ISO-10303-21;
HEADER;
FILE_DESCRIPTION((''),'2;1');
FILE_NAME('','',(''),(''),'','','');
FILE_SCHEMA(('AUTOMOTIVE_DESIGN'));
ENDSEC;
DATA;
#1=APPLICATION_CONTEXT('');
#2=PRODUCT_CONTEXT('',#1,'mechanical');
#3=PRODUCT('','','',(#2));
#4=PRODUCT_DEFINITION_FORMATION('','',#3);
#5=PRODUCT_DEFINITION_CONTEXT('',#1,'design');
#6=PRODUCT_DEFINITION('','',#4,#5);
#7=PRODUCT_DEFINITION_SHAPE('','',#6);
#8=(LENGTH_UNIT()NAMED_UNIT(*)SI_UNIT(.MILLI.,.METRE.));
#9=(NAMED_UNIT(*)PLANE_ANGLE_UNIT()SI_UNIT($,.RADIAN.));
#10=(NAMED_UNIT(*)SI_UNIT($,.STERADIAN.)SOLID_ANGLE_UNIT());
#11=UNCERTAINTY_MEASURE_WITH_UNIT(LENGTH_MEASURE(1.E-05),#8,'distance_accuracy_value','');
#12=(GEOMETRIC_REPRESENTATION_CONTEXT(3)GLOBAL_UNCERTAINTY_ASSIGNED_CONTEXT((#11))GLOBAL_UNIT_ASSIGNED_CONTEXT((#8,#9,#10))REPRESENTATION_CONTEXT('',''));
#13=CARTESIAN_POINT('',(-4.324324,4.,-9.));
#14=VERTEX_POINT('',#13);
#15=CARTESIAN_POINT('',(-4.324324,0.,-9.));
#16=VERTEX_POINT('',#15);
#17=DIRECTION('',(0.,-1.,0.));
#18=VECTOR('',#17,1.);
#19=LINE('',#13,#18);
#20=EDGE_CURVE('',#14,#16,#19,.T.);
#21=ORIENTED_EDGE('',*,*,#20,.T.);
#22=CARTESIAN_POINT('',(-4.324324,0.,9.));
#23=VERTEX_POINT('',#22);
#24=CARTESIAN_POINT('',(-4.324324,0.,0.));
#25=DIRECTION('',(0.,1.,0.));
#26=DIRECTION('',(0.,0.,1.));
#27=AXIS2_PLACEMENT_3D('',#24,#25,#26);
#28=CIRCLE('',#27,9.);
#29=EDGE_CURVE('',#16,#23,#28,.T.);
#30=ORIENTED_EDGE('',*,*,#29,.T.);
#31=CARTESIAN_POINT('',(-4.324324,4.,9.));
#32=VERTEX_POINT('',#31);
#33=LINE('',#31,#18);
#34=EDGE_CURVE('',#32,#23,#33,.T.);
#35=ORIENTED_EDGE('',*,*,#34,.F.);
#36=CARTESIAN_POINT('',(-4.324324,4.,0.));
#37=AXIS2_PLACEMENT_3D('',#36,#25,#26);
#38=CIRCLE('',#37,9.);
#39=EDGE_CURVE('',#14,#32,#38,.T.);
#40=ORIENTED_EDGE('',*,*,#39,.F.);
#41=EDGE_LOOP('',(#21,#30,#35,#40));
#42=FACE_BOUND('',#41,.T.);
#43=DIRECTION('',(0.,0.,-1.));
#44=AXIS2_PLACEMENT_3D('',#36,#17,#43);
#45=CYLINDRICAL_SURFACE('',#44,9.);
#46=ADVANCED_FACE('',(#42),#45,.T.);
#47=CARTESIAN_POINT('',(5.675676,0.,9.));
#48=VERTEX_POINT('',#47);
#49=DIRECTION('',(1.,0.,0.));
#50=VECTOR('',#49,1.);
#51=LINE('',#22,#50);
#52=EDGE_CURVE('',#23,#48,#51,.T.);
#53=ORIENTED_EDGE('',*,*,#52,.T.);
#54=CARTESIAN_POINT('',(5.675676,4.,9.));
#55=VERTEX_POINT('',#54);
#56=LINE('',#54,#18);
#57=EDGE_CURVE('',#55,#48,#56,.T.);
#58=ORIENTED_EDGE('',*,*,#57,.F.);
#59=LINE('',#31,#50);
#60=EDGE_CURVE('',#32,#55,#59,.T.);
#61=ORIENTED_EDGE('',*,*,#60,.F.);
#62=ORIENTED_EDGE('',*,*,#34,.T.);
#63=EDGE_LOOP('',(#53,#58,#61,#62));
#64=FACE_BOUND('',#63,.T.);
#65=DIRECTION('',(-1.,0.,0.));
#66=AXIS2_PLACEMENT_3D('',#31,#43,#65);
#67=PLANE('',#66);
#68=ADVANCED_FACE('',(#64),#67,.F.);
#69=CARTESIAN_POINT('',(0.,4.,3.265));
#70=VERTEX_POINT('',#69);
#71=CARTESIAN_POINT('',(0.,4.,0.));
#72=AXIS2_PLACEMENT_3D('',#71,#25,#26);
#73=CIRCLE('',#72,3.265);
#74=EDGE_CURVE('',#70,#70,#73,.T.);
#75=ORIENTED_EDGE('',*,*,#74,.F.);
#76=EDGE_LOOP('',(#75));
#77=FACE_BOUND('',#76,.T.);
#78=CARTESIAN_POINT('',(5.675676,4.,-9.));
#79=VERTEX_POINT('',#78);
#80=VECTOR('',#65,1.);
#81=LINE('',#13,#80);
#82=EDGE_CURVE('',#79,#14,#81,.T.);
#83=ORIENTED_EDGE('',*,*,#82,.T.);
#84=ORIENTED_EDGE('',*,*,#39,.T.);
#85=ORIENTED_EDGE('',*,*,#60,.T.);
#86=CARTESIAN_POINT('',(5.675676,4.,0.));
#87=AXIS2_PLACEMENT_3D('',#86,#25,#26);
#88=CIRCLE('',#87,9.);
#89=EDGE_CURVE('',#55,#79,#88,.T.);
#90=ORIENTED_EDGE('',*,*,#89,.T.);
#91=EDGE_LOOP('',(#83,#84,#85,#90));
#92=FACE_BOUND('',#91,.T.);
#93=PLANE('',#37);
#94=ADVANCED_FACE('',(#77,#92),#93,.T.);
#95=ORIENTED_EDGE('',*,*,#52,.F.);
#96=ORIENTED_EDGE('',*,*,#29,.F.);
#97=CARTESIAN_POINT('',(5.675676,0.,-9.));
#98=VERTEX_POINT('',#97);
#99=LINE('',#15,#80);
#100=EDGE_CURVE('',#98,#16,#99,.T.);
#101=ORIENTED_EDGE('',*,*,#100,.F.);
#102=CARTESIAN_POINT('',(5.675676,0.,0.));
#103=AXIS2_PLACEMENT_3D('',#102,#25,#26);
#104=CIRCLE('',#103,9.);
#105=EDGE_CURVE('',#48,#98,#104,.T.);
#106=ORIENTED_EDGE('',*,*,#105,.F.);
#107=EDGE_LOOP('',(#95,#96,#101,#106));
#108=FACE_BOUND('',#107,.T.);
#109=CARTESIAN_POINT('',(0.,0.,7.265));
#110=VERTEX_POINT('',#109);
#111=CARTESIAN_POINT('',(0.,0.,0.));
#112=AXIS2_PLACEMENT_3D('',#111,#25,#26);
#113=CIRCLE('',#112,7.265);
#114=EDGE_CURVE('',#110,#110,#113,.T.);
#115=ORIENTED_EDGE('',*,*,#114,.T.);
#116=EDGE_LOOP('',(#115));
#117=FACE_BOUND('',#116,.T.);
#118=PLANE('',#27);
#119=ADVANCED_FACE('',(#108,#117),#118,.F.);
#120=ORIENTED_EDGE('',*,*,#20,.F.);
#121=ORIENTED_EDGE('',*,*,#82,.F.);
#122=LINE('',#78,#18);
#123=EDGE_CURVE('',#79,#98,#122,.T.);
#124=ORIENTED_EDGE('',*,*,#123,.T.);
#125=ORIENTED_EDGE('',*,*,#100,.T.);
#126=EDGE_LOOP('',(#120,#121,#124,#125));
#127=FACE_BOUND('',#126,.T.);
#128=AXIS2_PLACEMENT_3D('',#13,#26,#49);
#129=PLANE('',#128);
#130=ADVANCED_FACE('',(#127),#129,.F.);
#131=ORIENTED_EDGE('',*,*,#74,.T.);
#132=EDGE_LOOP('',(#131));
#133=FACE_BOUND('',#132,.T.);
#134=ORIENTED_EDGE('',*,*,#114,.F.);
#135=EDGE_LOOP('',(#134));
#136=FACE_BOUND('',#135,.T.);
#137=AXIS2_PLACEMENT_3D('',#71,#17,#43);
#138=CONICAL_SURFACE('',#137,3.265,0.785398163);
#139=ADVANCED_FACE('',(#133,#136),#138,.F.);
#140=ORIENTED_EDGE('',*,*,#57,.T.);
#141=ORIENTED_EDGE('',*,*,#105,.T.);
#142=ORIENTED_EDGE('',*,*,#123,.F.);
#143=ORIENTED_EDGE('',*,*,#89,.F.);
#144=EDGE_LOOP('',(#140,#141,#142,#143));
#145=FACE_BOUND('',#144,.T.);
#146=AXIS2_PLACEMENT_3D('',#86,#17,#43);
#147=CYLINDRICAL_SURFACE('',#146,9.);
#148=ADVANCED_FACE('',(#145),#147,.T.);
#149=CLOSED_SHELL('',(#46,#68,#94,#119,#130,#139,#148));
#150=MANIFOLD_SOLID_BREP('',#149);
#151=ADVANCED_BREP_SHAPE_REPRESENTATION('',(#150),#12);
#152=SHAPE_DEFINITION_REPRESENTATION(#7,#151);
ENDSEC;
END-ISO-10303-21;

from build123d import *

# Parameters (mm, degrees)
RESSALTO_EXTRUS_O1_DEPTH = 4
ESBO_O3_R                = 3.265
CORTE_EXTRUS_O1_DEPTH    = 10
CHANFRO1_SIZE            = 4


with BuildPart() as part:
    # Esboço2 → Ressalto-extrusão1 (new body)
    with BuildSketch(Plane(origin=(0, 0, 0), x_dir=(1, 0, 0), z_dir=(0, 1, 0))):
        with BuildLine():
            Line((-4.324324324, 9), (5.675675676, 9))
            ThreePointArc((5.675675676, 9), (14.675675676, 0), (5.675675676, -9))
            Line((5.675675676, -9), (-4.324324324, -9))
            ThreePointArc((-4.324324324, -9), (-13.324324324, 0), (-4.324324324, 9))
        make_face()
    extrude(amount=RESSALTO_EXTRUS_O1_DEPTH)

    # Esboço3 → Corte-extrusão1 (cut)
    with BuildSketch(Plane(origin=(0, 0, 0), x_dir=(-1, 0, 0), z_dir=(0, -1, 0))):
        with Locations(Location((0, 0, 0), (0, 0, 90))):
            Circle(ESBO_O3_R)
    extrude(amount=-CORTE_EXTRUS_O1_DEPTH, mode=Mode.SUBTRACT)

    # Chanfro1
    chanfro1_edges = [part.edges().sort_by_distance(p)[0] for p in [
        (0, 0, 3.265),
    ]]
    chamfer(chanfro1_edges, length=CHANFRO1_SIZE - 0.0001)  # a hair under: the kernel refuses the full size


solid = part.part
